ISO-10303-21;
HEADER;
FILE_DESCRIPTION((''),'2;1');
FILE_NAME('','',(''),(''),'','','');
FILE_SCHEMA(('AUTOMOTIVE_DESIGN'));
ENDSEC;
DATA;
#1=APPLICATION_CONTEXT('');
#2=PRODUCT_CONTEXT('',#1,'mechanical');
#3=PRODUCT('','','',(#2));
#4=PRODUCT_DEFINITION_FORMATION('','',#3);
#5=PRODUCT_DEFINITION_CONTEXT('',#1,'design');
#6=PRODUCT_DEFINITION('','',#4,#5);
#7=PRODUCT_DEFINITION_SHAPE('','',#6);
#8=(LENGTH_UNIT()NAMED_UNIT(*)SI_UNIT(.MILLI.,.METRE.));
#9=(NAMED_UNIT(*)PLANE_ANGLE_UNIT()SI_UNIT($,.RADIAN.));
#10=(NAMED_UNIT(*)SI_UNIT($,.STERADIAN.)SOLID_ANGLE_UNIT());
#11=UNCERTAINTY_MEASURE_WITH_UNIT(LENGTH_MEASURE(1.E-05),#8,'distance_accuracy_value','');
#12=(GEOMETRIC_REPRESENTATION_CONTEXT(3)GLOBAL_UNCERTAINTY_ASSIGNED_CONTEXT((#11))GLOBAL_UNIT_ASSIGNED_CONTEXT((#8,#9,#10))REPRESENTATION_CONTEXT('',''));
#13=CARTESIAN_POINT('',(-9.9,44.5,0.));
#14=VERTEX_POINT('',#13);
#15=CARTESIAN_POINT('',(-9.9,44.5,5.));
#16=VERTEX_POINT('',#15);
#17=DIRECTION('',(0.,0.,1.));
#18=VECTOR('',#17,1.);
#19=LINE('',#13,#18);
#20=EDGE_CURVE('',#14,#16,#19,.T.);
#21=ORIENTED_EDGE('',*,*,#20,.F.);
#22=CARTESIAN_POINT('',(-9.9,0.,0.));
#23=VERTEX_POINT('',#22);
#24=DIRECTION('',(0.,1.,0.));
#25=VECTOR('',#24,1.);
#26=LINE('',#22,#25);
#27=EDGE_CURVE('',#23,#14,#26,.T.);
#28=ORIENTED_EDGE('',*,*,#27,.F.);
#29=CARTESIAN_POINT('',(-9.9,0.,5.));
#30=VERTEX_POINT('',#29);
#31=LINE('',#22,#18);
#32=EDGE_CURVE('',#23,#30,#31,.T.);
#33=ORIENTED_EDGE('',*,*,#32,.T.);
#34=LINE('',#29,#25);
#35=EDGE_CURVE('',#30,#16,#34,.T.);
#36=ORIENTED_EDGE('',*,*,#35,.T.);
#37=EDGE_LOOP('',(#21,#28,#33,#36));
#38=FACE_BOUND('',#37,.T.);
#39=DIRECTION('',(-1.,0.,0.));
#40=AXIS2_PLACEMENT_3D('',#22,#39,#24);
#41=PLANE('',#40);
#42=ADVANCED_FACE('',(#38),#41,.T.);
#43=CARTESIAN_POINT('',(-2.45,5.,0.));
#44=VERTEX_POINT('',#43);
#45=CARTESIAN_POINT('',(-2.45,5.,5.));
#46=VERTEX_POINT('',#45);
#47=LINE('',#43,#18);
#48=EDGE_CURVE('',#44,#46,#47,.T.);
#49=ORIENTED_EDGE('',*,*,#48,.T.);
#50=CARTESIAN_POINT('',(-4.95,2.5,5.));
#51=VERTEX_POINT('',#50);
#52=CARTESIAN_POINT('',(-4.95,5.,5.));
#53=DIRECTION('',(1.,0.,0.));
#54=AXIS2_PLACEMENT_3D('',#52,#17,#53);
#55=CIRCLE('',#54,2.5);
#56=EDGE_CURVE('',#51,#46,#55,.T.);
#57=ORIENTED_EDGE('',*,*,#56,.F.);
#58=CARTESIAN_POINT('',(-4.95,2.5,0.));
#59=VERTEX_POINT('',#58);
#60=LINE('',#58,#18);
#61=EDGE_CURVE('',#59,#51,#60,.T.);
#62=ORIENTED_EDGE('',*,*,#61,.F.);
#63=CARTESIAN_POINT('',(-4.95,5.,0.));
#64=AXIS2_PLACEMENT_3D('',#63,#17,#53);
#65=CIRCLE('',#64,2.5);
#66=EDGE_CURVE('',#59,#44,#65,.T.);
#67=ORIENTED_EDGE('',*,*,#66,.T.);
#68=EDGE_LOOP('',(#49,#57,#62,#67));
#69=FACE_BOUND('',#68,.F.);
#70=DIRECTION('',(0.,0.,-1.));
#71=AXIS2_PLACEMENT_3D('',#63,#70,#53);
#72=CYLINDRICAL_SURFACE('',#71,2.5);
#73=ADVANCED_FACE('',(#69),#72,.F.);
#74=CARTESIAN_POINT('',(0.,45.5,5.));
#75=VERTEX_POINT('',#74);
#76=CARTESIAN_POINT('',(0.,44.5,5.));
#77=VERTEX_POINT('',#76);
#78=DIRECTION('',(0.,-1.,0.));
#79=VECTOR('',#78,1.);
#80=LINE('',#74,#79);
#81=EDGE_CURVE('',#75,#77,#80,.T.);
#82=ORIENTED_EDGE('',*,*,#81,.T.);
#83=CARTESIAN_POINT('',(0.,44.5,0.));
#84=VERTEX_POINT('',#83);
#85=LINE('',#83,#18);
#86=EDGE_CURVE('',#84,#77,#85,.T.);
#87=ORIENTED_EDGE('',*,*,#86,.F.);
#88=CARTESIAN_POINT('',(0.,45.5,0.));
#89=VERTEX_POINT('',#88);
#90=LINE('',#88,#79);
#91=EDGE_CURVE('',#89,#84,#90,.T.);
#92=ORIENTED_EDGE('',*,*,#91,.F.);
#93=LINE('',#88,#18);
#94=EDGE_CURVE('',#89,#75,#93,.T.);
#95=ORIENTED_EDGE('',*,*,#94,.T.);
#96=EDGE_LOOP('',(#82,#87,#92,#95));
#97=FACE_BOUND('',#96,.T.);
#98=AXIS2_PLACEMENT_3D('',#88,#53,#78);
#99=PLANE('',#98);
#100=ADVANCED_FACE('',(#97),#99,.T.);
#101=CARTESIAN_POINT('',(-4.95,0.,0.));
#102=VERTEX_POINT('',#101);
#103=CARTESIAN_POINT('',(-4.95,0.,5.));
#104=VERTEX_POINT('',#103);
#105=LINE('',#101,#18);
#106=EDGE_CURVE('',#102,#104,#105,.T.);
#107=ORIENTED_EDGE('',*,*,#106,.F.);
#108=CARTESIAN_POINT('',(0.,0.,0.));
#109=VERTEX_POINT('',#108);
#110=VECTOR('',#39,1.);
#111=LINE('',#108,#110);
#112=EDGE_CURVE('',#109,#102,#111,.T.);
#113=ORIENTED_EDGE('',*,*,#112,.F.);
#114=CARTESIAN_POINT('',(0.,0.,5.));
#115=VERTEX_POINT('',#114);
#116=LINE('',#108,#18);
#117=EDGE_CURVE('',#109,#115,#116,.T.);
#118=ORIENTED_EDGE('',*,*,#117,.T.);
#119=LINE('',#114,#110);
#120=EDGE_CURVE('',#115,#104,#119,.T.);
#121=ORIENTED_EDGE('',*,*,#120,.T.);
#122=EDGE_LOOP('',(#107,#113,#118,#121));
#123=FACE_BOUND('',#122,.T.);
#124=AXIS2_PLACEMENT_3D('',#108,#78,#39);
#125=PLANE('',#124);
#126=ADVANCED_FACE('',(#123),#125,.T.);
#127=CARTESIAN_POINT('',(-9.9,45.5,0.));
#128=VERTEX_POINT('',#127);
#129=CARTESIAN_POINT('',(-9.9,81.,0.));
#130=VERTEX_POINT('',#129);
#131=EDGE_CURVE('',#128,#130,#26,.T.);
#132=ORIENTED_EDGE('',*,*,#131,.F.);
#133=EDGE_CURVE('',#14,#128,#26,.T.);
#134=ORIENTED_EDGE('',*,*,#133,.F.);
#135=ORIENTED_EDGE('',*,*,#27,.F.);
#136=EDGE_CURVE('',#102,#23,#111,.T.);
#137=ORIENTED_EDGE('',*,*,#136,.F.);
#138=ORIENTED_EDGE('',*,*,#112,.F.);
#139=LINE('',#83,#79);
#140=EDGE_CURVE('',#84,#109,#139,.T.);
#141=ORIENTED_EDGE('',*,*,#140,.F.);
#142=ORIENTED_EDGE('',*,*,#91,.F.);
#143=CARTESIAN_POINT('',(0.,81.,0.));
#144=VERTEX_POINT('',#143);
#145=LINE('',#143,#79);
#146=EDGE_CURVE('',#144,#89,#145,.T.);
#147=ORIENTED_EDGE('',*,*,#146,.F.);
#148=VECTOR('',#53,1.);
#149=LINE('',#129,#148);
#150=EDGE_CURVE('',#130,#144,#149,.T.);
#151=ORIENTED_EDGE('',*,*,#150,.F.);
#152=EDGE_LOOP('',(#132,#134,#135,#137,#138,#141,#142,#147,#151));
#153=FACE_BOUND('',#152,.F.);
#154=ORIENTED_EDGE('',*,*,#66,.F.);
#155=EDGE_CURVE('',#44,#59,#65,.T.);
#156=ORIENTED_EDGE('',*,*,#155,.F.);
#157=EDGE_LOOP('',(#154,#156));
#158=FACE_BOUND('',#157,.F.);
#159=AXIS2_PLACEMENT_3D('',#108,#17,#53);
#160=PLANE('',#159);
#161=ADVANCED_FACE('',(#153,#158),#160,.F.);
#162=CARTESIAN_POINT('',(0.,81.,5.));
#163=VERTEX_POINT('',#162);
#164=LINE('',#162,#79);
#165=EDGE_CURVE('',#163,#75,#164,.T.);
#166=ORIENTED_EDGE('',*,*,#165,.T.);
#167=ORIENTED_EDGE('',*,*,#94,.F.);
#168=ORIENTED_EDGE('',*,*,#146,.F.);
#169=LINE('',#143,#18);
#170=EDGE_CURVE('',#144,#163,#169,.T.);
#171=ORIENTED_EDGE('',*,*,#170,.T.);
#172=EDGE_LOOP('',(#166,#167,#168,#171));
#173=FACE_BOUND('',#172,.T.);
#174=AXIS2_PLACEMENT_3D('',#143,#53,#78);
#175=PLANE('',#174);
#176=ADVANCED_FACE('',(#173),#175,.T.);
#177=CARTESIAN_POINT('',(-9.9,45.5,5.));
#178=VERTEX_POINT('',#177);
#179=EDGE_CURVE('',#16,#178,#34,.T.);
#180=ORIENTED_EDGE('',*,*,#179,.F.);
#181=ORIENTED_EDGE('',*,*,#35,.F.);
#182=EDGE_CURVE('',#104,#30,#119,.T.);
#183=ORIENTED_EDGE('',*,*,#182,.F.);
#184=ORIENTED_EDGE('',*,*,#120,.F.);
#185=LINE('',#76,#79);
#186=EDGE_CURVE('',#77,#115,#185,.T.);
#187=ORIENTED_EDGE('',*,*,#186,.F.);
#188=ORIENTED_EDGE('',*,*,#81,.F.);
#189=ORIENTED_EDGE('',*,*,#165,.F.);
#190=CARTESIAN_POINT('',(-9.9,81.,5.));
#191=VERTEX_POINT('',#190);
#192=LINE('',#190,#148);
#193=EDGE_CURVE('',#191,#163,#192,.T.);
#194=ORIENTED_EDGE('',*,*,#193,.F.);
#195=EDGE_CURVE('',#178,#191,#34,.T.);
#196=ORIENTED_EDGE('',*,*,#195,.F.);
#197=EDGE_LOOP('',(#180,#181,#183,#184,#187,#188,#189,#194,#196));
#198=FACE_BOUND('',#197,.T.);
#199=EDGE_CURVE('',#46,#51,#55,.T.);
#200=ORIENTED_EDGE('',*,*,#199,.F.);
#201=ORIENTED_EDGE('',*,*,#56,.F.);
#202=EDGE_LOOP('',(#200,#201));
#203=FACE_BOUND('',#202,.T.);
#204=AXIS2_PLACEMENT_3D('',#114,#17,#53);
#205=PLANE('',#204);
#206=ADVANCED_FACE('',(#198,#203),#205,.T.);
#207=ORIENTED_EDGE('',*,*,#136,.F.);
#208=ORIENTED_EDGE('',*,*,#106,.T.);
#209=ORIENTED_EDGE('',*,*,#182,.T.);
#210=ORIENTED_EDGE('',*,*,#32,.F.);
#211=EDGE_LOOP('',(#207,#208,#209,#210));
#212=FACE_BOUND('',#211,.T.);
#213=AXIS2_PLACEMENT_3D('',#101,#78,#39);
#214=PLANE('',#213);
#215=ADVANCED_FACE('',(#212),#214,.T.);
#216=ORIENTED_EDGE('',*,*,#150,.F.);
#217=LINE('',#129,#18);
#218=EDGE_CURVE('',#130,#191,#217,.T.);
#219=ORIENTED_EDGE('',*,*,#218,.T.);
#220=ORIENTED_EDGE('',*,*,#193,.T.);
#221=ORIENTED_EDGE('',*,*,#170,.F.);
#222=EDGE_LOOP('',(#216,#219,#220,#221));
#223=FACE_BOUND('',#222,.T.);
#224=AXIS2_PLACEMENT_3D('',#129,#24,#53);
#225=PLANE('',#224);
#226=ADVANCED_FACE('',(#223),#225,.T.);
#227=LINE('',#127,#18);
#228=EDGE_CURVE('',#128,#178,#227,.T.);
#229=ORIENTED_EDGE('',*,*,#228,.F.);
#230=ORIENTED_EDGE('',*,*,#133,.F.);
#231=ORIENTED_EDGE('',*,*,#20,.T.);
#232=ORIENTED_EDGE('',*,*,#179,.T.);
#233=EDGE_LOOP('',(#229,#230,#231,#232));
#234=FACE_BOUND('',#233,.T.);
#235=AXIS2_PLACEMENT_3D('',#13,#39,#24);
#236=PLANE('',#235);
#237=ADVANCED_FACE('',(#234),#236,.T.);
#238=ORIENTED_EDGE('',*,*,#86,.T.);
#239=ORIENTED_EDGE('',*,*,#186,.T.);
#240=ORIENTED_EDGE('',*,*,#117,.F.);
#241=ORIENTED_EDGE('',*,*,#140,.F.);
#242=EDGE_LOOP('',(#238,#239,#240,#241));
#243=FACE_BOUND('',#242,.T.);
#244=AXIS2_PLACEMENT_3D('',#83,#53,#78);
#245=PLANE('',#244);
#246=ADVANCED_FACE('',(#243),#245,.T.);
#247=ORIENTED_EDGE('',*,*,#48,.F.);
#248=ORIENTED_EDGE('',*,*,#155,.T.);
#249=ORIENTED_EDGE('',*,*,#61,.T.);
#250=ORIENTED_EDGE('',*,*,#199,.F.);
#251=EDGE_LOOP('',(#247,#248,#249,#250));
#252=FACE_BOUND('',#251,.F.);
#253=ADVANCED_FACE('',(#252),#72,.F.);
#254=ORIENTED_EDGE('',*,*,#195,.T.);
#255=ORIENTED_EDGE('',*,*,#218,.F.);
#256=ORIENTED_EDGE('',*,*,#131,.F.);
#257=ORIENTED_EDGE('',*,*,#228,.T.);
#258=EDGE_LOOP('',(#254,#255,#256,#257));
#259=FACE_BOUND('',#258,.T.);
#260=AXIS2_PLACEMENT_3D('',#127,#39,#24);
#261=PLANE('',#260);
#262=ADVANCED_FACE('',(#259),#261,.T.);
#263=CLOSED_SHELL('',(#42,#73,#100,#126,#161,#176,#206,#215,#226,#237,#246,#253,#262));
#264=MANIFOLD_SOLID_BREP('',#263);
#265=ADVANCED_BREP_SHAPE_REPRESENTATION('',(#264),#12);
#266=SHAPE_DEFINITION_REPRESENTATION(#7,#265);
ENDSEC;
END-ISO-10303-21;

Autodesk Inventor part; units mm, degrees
ref_plane "YZ Plane" through (0, 0, 0) normal (1, 0, 0) x (0, 1, 0)
ref_plane "XZ Plane" through (0, 0, 0) normal (0, 1, 0) x (-1, 0, 0)
ref_plane "XY Plane" through (0, 0, 0) normal (0, 0, 1) x (1, 0, 0)
sketch "Sketch2" plane through (0, 0, 0) normal (0, 0, 1) x (1, 0, 0)
  line L0 (0, 0) -> (-9.9, 0)
  line L1 (-4.95, 0) -> (-4.95, 2.5)
  line L2 (-4.95, 0) -> (-2.45, 0) construction
  circle A0 centre (-4.95, 5) radius 2.5
  line L3 (-4.95, 7.5) -> (32.05, 7.5) construction
  line L4 (0, 44.5) -> (0, 0)
  line L5 (0, 0) -> (-9.9, 0)
  line L6 (-9.9, 0) -> (-9.9, 44.5)
  line L7 (0, 45.5) -> (0, 0)
  line L8 (0, 0) -> (-9.9, 0)
  line L9 (-9.9, 0) -> (-9.9, 45.5)
  line L10 (-4.95, 7.5) -> (66.05, 7.5) construction
  line L11 (0, 0) -> (-9.9, 0)
  line L12 (-9.9, 0) -> (-9.9, 81)
  line L13 (-9.9, 81) -> (0, 81)
  line L14 (0, 81) -> (0, 0)
  dimension "d35" = 5
  dimension "d33" = 2.5
  dimension "d34" = 90
  dimension "d46" = 9.9
  dimension "d47" = 81
extrude "Extrusion6" add sketch "Sketch2" along normal blind 5
properties part number "Elbow_Cube_Holder_TestFit_V2"
